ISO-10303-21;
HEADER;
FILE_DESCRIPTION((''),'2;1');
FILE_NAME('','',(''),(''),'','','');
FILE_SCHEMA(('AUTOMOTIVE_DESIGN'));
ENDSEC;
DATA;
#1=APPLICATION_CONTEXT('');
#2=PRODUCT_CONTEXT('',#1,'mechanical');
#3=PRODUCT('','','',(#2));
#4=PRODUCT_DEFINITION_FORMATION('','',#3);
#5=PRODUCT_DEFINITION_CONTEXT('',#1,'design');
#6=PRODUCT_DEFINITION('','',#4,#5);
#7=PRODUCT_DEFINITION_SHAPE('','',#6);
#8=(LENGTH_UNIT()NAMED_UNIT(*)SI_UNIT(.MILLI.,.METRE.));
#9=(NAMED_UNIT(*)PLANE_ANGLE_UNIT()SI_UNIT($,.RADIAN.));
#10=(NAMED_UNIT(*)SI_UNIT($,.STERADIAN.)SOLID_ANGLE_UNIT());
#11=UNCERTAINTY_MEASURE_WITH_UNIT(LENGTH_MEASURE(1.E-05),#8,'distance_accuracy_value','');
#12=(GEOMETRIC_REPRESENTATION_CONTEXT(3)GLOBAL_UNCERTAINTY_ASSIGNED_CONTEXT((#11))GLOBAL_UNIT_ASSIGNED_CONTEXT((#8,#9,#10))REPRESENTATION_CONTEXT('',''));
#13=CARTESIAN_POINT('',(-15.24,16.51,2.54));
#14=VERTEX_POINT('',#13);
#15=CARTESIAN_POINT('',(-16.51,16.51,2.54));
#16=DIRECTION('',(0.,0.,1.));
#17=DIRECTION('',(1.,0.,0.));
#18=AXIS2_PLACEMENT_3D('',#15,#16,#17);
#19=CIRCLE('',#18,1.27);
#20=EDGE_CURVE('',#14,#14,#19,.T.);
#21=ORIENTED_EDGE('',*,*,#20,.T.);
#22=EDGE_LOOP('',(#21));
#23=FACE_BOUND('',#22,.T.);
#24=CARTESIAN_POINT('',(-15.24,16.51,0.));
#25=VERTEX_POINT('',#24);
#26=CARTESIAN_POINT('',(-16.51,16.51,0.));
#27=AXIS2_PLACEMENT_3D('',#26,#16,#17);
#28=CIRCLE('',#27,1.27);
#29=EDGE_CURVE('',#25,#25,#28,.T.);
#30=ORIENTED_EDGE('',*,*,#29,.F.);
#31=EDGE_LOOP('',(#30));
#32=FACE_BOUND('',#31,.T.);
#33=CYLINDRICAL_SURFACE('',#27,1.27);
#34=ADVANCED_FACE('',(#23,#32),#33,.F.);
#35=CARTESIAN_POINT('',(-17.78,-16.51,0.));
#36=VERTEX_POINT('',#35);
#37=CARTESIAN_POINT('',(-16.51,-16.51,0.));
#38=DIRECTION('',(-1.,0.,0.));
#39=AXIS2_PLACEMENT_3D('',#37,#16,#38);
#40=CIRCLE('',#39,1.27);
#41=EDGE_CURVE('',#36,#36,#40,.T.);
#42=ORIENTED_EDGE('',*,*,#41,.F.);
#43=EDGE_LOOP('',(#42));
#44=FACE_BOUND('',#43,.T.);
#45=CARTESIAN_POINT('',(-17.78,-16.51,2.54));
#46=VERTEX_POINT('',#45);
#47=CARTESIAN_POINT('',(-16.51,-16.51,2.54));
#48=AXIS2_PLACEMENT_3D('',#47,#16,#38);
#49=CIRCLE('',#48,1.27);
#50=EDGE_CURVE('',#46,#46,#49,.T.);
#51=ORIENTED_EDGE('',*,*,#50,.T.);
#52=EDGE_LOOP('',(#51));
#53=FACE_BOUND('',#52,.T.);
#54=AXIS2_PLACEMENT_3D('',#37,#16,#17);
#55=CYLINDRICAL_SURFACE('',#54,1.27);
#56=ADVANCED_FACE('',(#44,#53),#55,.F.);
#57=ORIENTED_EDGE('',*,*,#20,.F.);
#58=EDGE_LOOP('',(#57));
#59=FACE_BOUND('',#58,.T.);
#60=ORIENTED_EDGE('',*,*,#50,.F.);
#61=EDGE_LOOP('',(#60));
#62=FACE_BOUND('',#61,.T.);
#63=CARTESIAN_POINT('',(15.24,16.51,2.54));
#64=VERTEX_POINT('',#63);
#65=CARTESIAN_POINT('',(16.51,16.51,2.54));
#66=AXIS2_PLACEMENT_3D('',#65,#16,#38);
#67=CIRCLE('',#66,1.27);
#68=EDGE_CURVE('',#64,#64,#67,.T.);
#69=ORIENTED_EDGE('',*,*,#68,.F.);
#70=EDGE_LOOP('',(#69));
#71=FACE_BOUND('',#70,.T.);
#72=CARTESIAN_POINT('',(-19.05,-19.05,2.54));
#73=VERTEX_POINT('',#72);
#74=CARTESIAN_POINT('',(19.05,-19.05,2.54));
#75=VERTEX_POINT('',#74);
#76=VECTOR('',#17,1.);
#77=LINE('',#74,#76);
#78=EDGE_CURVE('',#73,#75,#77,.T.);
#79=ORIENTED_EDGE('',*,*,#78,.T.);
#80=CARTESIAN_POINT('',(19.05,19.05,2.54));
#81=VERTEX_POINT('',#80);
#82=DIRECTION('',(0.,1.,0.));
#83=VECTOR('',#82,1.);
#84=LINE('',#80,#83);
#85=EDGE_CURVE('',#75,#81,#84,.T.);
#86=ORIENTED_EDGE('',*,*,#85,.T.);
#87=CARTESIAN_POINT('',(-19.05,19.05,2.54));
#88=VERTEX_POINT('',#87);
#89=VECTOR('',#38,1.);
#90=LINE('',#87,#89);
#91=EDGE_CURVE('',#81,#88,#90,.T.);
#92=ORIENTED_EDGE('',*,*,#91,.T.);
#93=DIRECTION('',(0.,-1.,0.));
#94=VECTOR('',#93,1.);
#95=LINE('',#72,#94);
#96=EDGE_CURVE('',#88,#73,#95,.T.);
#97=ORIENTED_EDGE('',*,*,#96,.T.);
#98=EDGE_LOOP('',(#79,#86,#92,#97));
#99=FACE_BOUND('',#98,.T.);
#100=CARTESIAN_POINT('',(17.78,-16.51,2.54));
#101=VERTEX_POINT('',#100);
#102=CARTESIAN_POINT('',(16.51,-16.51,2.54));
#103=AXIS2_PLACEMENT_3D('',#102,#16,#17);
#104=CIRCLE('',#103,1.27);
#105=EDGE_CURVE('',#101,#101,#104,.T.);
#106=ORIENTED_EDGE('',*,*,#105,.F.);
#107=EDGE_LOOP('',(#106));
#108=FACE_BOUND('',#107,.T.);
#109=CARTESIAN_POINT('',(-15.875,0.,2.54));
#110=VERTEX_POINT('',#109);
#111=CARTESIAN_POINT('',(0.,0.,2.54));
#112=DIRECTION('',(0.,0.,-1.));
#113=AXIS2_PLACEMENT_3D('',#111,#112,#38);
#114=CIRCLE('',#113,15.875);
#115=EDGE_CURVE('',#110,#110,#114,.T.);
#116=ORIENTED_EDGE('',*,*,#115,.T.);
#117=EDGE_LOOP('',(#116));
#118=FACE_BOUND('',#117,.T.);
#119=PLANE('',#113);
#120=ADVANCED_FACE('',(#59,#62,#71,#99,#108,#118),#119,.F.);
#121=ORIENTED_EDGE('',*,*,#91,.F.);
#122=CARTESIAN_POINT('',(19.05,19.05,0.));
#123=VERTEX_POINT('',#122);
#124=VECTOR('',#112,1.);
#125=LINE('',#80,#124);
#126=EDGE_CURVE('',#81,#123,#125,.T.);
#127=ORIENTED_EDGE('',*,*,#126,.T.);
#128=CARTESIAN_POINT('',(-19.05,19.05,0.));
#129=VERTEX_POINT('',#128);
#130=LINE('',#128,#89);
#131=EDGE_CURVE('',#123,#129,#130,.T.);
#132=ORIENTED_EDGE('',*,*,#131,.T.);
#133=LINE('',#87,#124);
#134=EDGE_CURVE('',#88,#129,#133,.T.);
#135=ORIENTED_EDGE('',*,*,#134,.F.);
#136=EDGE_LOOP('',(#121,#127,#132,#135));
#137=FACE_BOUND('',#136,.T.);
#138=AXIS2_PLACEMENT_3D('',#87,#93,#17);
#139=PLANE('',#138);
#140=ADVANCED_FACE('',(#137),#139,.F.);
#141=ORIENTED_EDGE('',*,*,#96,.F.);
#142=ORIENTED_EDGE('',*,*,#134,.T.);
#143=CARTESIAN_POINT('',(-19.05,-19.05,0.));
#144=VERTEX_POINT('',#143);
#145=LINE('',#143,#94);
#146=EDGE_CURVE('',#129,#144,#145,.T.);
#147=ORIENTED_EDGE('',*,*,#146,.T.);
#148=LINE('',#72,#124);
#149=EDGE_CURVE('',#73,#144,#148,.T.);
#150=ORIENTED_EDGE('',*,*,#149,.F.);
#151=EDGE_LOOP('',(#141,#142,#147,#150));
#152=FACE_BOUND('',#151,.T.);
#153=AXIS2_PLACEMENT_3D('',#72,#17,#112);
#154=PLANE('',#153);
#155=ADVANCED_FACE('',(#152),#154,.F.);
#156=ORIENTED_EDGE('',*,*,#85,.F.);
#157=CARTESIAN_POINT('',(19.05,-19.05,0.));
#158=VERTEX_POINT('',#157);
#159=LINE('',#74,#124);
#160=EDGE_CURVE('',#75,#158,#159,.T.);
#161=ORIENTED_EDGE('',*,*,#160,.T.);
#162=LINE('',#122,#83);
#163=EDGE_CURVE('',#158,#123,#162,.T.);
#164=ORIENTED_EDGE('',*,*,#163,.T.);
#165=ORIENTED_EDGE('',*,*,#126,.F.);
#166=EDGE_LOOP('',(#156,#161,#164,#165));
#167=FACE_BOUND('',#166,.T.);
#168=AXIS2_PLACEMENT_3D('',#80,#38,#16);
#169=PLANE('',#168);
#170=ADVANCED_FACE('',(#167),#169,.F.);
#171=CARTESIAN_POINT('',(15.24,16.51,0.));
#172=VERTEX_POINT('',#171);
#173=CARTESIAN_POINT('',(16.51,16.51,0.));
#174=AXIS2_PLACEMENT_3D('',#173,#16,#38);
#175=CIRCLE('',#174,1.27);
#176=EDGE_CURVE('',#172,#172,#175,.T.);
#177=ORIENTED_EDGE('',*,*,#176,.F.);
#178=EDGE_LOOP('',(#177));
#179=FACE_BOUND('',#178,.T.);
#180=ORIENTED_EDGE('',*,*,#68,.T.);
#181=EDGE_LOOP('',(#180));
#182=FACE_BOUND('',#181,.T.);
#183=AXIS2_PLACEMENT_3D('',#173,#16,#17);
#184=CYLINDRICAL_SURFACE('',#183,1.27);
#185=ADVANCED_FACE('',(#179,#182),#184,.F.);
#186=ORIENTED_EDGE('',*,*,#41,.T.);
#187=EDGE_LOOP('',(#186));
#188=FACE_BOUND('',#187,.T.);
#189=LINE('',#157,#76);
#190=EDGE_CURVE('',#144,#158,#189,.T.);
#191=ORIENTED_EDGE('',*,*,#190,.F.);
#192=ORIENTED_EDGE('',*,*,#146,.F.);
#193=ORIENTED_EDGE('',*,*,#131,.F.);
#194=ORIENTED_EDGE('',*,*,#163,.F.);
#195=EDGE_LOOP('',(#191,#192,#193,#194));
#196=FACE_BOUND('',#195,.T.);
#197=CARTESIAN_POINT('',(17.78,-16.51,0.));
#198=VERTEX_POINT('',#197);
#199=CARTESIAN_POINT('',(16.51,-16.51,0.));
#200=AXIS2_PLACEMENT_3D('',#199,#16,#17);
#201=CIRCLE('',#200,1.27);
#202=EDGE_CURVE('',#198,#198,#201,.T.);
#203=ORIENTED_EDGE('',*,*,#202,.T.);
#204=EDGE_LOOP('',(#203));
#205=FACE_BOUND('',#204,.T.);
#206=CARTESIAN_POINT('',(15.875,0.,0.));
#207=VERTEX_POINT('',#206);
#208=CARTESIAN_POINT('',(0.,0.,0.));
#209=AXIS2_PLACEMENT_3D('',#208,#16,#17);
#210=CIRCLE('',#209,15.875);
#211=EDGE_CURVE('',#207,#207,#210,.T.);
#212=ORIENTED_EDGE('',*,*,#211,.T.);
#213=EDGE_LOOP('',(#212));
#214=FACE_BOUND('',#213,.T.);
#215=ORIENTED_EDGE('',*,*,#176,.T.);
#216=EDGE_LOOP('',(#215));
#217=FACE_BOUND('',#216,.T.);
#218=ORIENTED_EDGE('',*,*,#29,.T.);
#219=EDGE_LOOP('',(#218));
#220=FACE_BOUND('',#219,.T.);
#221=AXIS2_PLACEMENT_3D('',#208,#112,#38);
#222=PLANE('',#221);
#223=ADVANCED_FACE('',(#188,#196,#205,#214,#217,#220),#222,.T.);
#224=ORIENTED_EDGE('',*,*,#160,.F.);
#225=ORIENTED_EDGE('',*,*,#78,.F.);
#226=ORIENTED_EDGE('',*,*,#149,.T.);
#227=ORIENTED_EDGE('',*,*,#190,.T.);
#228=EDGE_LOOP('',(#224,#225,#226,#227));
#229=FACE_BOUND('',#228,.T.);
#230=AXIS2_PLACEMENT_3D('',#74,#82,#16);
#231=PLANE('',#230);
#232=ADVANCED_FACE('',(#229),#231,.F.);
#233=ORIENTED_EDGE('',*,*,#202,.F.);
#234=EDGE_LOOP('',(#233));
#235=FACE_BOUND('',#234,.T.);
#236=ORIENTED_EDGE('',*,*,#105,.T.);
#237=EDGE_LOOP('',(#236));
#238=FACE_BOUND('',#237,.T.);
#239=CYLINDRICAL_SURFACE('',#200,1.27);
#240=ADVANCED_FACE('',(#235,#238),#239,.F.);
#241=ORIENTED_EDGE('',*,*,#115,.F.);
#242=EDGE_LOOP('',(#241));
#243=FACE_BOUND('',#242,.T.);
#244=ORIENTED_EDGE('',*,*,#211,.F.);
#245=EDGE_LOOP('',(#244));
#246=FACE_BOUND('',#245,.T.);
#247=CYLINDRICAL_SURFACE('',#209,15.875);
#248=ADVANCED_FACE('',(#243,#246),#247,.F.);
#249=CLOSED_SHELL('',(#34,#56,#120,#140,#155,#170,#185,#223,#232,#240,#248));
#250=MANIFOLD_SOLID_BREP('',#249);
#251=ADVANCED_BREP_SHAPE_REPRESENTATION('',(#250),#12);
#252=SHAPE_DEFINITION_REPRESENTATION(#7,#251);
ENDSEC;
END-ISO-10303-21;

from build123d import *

# Parameters (mm, degrees)
SKETCH1_W               = 38.1
SKETCH1_H               = 38.1
BOSS_EXTRUDE1_DEPTH     = 2.54
CUT_EXTRUDE1_DEPTH      = 28.060240206
CUT_EXTRUDE1_DEPTH_BACK = 28.060240206
SKETCH2_R               = 15.875
HOLE1_OUTLINE_R         = 1.27
HOLE1_DEPTH             = 2.54


# Read off the part's stored shape, not the designer's step: Hole1
with BuildPart() as part:
    # Sketch1 → Boss-Extrude1 (new body)
    with BuildSketch(Plane.XY):
        Rectangle(SKETCH1_W, SKETCH1_H)
    extrude(amount=BOSS_EXTRUDE1_DEPTH)

    # Sketch2 → Cut-Extrude1 (cut, two sides: drawn at the far end of the back side and taken through both)
    with BuildSketch(Plane.XY.offset(2.54).offset(-CUT_EXTRUDE1_DEPTH_BACK)):
        Circle(SKETCH2_R)
    extrude(amount=CUT_EXTRUDE1_DEPTH + CUT_EXTRUDE1_DEPTH_BACK, mode=Mode.SUBTRACT)

    # Hole1 outline → Hole1 (cut)
    with BuildSketch(Plane.XY):
        with Locations((-16.51, 16.51)):
            Circle(HOLE1_OUTLINE_R)
        with Locations((16.51, 16.51)):
            Circle(HOLE1_OUTLINE_R)
        with Locations((16.51, -16.51)):
            Circle(HOLE1_OUTLINE_R)
        with Locations((-16.51, -16.51)):
            Circle(HOLE1_OUTLINE_R)
    extrude(amount=HOLE1_DEPTH, mode=Mode.SUBTRACT)


solid = part.part
